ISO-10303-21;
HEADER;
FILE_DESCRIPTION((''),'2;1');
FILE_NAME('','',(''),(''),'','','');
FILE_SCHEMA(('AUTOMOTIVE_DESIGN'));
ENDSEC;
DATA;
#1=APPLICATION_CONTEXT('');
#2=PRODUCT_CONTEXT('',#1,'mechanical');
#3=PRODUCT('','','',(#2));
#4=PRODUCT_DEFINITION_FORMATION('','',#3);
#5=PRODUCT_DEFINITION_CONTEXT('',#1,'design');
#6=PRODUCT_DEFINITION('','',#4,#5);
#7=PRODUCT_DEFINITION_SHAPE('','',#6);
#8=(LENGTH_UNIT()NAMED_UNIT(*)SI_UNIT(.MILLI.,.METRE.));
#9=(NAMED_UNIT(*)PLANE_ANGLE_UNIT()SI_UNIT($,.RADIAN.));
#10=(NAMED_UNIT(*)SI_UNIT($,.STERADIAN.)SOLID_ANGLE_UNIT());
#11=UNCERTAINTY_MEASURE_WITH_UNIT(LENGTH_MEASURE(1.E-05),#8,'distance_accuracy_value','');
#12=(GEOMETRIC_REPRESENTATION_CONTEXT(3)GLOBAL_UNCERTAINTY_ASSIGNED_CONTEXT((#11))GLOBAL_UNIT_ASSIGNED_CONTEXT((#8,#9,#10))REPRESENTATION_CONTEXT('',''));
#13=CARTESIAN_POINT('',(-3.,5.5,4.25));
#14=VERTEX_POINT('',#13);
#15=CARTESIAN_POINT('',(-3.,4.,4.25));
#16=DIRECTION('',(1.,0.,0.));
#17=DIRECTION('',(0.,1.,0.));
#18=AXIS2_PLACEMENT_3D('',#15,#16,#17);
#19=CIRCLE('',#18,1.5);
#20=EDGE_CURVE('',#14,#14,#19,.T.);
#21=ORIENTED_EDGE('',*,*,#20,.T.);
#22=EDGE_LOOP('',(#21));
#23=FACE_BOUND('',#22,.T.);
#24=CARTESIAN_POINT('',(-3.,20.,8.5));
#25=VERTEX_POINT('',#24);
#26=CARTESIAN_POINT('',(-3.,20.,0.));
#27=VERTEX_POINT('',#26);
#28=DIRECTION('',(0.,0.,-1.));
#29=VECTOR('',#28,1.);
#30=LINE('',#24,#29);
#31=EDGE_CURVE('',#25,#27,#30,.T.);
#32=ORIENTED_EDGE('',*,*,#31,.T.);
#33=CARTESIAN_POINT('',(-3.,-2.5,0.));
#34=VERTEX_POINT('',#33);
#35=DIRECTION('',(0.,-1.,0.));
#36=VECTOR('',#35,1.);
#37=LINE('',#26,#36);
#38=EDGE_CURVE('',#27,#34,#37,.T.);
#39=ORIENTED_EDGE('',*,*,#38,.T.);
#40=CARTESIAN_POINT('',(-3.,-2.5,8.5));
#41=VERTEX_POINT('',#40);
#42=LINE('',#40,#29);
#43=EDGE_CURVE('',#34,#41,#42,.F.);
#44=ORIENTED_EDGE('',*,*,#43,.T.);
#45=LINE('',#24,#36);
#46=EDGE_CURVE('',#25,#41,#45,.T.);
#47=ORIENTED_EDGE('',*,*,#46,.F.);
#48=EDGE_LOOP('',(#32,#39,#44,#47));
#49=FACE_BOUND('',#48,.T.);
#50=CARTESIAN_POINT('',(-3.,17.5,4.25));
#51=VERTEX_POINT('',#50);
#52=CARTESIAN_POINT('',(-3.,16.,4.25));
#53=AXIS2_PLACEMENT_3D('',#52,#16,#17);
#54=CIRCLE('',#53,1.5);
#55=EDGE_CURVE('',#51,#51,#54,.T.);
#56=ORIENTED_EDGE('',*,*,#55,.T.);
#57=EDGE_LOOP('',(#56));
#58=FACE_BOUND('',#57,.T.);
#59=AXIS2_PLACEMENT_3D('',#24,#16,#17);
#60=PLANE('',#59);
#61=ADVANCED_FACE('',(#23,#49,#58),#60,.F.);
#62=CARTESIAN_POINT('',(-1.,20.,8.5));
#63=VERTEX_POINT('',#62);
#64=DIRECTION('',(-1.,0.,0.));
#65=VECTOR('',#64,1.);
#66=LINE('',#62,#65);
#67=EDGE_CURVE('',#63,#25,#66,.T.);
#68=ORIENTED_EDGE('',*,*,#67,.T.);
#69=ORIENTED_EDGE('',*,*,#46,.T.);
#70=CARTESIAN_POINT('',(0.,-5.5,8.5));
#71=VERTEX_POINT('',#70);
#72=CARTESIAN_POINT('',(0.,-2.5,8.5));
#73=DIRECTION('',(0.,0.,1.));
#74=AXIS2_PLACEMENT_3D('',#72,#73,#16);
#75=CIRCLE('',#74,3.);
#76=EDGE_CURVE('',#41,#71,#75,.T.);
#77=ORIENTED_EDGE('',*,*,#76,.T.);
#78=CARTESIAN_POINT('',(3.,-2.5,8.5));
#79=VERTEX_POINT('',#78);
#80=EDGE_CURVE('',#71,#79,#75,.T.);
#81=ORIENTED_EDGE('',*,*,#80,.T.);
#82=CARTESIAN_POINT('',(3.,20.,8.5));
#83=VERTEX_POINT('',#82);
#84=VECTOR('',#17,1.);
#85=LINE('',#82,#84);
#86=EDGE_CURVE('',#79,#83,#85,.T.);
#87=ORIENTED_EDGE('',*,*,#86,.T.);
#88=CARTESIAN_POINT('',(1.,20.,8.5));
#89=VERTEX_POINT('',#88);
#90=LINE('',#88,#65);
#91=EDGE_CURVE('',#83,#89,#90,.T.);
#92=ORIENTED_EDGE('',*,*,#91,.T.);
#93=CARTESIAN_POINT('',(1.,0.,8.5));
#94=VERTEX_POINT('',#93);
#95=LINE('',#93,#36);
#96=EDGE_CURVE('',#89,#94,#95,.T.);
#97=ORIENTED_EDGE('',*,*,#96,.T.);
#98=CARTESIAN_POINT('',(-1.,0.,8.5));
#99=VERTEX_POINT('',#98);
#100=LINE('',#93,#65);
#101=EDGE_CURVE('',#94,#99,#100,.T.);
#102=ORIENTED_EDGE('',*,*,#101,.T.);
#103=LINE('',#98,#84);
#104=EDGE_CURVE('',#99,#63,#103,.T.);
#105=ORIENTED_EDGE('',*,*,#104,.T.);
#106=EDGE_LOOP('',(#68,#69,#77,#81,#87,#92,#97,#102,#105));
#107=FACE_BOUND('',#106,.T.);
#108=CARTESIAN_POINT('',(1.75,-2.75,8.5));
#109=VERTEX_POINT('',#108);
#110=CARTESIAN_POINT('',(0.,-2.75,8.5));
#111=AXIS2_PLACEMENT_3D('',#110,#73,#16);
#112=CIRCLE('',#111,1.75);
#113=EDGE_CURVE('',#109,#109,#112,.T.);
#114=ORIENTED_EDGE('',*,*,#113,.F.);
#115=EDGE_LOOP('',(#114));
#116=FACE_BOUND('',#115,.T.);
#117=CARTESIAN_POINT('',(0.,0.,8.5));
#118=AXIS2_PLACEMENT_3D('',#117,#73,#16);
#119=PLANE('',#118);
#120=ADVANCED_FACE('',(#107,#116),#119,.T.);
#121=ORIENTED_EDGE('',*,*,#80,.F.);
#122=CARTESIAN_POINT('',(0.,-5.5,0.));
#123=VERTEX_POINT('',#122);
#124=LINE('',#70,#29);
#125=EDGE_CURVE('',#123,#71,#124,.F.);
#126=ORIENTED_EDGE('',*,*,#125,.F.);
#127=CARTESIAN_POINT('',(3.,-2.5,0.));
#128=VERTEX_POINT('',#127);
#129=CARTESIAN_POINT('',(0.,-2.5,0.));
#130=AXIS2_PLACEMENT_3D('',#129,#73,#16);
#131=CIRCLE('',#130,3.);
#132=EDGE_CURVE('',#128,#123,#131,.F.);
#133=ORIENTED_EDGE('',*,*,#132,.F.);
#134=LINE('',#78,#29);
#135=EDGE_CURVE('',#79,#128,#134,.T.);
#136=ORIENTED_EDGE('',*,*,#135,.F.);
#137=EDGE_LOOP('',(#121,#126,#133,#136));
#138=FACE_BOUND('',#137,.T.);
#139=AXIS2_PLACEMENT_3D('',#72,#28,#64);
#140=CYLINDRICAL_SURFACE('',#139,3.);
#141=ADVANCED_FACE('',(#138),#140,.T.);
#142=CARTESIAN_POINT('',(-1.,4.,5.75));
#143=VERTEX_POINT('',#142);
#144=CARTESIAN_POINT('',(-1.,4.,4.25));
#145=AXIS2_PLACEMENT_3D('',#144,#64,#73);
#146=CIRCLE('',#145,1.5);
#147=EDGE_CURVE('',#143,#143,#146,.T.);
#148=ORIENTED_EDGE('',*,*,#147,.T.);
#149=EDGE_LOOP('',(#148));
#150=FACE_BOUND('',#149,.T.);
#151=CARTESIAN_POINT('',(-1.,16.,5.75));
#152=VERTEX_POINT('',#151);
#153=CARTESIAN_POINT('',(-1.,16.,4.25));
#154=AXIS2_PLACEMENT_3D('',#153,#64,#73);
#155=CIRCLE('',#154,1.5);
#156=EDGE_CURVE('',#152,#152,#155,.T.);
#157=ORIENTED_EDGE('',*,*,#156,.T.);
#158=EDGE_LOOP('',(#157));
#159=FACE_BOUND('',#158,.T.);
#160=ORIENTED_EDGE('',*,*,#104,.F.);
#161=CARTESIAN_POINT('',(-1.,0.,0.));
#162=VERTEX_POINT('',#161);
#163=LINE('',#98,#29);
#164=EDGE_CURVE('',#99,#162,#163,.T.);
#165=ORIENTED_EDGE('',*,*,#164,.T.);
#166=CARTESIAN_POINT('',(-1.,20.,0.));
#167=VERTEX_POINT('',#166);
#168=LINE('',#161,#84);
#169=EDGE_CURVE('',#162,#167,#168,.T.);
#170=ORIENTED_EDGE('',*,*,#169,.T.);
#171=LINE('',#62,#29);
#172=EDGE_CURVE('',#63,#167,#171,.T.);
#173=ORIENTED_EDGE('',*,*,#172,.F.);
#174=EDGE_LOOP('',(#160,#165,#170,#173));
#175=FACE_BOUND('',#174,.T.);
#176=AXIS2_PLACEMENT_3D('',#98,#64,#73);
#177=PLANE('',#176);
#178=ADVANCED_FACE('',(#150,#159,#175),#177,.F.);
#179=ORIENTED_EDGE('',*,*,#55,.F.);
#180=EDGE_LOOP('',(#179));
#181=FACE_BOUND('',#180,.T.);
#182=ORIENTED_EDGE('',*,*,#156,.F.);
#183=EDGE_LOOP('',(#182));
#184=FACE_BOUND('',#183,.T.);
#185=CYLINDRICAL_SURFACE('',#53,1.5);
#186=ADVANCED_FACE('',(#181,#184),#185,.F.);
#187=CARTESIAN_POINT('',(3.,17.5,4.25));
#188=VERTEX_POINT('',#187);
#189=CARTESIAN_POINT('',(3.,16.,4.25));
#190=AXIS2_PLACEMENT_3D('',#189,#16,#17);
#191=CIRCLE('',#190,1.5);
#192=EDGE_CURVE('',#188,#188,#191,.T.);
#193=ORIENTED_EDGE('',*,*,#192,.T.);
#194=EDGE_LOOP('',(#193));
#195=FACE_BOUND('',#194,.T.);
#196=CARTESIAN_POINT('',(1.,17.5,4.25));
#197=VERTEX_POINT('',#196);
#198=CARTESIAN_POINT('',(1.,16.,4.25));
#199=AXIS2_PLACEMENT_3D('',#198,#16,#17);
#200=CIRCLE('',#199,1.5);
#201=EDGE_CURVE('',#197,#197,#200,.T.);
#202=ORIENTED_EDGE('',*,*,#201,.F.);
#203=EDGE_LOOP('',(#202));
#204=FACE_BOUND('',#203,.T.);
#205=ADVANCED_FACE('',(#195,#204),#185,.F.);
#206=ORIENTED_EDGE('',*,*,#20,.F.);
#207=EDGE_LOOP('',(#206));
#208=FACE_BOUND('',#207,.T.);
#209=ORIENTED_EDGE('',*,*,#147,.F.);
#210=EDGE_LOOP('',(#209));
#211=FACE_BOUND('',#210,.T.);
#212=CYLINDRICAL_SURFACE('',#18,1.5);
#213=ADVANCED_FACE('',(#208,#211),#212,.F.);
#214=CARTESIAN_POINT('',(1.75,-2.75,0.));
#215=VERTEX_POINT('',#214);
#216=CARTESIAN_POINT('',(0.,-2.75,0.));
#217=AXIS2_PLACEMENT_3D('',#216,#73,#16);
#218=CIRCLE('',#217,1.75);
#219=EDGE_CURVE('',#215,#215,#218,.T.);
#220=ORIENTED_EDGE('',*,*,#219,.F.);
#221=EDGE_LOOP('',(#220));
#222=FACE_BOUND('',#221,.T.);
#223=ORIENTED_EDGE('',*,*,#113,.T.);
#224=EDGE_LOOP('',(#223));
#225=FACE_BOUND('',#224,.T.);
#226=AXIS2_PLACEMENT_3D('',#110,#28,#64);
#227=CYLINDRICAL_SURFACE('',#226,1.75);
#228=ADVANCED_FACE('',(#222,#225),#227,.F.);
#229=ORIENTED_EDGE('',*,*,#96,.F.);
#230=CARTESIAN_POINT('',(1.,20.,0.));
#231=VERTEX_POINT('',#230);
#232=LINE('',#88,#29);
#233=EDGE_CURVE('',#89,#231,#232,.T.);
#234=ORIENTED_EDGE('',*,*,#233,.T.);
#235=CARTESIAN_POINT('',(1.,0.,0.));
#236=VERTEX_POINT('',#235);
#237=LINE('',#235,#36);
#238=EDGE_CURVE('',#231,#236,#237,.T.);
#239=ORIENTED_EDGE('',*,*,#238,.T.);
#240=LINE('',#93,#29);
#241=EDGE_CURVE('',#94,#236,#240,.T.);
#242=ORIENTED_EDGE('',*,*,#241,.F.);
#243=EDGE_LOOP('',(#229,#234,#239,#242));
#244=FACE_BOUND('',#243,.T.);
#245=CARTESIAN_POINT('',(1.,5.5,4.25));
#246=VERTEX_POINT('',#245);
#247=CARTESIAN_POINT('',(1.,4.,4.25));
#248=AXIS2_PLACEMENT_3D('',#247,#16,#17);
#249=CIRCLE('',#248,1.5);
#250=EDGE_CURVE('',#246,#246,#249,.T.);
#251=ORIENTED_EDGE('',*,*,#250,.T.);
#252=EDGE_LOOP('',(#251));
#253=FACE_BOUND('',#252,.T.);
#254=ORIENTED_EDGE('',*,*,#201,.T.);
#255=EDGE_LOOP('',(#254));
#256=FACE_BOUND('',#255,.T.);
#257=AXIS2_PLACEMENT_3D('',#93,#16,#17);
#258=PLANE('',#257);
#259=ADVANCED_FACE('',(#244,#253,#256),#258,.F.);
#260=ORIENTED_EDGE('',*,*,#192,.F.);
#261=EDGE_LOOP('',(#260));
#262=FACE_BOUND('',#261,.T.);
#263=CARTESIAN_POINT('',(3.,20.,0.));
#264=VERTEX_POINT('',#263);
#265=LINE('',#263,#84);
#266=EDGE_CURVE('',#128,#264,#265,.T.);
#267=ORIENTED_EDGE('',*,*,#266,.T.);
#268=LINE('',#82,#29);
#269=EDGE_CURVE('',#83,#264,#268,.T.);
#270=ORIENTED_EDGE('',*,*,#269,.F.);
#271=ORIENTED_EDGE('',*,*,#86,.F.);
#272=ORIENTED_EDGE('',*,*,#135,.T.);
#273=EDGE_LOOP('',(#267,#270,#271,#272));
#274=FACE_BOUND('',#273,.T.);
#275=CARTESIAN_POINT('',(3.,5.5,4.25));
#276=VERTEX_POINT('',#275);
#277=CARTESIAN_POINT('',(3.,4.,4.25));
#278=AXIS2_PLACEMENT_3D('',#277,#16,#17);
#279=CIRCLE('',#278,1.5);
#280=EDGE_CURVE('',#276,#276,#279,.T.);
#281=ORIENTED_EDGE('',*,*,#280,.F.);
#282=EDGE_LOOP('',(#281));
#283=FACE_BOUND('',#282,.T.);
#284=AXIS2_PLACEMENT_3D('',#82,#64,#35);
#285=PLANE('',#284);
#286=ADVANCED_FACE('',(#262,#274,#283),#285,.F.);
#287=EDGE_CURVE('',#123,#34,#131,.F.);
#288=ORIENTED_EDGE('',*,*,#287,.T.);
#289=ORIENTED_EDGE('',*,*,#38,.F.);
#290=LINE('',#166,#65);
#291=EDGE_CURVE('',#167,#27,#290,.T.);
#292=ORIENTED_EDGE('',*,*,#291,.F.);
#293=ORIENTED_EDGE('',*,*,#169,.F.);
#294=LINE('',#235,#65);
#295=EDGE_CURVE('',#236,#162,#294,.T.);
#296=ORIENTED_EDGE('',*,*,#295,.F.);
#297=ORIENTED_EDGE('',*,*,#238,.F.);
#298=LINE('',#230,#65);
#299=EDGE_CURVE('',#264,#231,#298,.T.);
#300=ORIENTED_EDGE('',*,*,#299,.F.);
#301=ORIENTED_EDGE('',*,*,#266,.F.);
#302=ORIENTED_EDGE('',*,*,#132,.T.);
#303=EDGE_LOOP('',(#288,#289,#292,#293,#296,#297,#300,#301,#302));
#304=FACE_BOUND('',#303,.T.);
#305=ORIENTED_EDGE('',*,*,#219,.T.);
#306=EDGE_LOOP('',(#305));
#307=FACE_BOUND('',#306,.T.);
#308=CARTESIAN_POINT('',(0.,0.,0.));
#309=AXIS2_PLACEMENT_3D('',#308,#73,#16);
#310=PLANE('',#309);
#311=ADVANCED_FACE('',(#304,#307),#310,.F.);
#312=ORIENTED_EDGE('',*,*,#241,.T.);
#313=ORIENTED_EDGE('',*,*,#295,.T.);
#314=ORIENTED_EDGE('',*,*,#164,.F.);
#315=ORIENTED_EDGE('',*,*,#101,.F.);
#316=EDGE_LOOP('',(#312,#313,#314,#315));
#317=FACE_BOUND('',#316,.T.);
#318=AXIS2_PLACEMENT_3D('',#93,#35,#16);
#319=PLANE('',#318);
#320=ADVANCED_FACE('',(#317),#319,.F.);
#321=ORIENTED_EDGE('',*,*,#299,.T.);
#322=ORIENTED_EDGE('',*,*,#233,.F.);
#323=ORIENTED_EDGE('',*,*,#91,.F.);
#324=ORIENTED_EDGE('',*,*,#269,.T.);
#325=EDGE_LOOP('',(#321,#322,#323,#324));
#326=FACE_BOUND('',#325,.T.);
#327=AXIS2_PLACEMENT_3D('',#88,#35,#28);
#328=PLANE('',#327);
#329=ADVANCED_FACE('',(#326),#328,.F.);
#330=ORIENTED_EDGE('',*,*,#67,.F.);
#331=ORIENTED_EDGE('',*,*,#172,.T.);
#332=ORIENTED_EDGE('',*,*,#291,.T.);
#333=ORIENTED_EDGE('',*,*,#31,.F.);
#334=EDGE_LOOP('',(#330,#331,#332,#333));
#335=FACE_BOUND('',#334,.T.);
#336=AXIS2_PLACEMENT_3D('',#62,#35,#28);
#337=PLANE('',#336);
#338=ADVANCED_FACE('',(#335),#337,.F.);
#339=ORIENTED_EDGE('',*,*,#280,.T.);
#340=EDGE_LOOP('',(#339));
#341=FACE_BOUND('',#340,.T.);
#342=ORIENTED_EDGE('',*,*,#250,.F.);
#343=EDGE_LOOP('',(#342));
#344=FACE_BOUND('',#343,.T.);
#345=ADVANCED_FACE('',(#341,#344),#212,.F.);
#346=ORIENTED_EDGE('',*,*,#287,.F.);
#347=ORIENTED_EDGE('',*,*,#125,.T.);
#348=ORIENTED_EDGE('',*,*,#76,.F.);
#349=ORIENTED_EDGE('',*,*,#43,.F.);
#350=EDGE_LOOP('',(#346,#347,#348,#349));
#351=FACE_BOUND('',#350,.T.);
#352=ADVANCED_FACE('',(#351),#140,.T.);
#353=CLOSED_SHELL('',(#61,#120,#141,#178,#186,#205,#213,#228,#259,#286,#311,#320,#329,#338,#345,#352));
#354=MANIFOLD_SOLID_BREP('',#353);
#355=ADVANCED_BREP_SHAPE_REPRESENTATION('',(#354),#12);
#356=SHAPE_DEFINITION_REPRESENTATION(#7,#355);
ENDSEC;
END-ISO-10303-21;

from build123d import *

# Parameters (mm, degrees)
CROQUIS1_R              = 1.75
SALIENTE_EXTRUIR1_DEPTH = 8.5
REDONDEO1_R             = 3
CORTAR_EXTRUIR1_START   = -6
CROQUIS2_R              = 1.5
CORTAR_EXTRUIR1_DEPTH   = 6


with BuildPart() as part:
    # Croquis1 → Saliente-Extruir1 (new body)
    with BuildSketch(Plane.XY):
        Polygon((1, 0), (-1, 0), (-1, 20), (-3, 20), (-3, -5.5), (3, -5.5), (3, 20), (1, 20), align=None)
        with Locations((0, -2.75)):
            Circle(CROQUIS1_R, mode=Mode.SUBTRACT)
    extrude(amount=SALIENTE_EXTRUIR1_DEPTH)

    # Redondeo1
    redondeo1_edges = [part.edges().sort_by_distance(p)[0] for p in [
        (-3, -5.5, 4.25),
        (3, -5.5, 4.25),
    ]]
    fillet(redondeo1_edges, radius=REDONDEO1_R - 0.0001)  # a hair under: the kernel refuses the full size

    # Croquis2 → Cortar-Extruir1 (cut)
    with BuildSketch(Plane(origin=(3, 0, 0), x_dir=(0, 0, -1), z_dir=(1, 0, 0)).offset(CORTAR_EXTRUIR1_START)):
        with Locations(Location((-4.25, 16, 0), (0, 0, 90))):
            Circle(CROQUIS2_R)
        with Locations(Location((-4.25, 4, 0), (0, 0, 90))):
            Circle(CROQUIS2_R)
    extrude(amount=CORTAR_EXTRUIR1_DEPTH, mode=Mode.SUBTRACT)


solid = part.part
